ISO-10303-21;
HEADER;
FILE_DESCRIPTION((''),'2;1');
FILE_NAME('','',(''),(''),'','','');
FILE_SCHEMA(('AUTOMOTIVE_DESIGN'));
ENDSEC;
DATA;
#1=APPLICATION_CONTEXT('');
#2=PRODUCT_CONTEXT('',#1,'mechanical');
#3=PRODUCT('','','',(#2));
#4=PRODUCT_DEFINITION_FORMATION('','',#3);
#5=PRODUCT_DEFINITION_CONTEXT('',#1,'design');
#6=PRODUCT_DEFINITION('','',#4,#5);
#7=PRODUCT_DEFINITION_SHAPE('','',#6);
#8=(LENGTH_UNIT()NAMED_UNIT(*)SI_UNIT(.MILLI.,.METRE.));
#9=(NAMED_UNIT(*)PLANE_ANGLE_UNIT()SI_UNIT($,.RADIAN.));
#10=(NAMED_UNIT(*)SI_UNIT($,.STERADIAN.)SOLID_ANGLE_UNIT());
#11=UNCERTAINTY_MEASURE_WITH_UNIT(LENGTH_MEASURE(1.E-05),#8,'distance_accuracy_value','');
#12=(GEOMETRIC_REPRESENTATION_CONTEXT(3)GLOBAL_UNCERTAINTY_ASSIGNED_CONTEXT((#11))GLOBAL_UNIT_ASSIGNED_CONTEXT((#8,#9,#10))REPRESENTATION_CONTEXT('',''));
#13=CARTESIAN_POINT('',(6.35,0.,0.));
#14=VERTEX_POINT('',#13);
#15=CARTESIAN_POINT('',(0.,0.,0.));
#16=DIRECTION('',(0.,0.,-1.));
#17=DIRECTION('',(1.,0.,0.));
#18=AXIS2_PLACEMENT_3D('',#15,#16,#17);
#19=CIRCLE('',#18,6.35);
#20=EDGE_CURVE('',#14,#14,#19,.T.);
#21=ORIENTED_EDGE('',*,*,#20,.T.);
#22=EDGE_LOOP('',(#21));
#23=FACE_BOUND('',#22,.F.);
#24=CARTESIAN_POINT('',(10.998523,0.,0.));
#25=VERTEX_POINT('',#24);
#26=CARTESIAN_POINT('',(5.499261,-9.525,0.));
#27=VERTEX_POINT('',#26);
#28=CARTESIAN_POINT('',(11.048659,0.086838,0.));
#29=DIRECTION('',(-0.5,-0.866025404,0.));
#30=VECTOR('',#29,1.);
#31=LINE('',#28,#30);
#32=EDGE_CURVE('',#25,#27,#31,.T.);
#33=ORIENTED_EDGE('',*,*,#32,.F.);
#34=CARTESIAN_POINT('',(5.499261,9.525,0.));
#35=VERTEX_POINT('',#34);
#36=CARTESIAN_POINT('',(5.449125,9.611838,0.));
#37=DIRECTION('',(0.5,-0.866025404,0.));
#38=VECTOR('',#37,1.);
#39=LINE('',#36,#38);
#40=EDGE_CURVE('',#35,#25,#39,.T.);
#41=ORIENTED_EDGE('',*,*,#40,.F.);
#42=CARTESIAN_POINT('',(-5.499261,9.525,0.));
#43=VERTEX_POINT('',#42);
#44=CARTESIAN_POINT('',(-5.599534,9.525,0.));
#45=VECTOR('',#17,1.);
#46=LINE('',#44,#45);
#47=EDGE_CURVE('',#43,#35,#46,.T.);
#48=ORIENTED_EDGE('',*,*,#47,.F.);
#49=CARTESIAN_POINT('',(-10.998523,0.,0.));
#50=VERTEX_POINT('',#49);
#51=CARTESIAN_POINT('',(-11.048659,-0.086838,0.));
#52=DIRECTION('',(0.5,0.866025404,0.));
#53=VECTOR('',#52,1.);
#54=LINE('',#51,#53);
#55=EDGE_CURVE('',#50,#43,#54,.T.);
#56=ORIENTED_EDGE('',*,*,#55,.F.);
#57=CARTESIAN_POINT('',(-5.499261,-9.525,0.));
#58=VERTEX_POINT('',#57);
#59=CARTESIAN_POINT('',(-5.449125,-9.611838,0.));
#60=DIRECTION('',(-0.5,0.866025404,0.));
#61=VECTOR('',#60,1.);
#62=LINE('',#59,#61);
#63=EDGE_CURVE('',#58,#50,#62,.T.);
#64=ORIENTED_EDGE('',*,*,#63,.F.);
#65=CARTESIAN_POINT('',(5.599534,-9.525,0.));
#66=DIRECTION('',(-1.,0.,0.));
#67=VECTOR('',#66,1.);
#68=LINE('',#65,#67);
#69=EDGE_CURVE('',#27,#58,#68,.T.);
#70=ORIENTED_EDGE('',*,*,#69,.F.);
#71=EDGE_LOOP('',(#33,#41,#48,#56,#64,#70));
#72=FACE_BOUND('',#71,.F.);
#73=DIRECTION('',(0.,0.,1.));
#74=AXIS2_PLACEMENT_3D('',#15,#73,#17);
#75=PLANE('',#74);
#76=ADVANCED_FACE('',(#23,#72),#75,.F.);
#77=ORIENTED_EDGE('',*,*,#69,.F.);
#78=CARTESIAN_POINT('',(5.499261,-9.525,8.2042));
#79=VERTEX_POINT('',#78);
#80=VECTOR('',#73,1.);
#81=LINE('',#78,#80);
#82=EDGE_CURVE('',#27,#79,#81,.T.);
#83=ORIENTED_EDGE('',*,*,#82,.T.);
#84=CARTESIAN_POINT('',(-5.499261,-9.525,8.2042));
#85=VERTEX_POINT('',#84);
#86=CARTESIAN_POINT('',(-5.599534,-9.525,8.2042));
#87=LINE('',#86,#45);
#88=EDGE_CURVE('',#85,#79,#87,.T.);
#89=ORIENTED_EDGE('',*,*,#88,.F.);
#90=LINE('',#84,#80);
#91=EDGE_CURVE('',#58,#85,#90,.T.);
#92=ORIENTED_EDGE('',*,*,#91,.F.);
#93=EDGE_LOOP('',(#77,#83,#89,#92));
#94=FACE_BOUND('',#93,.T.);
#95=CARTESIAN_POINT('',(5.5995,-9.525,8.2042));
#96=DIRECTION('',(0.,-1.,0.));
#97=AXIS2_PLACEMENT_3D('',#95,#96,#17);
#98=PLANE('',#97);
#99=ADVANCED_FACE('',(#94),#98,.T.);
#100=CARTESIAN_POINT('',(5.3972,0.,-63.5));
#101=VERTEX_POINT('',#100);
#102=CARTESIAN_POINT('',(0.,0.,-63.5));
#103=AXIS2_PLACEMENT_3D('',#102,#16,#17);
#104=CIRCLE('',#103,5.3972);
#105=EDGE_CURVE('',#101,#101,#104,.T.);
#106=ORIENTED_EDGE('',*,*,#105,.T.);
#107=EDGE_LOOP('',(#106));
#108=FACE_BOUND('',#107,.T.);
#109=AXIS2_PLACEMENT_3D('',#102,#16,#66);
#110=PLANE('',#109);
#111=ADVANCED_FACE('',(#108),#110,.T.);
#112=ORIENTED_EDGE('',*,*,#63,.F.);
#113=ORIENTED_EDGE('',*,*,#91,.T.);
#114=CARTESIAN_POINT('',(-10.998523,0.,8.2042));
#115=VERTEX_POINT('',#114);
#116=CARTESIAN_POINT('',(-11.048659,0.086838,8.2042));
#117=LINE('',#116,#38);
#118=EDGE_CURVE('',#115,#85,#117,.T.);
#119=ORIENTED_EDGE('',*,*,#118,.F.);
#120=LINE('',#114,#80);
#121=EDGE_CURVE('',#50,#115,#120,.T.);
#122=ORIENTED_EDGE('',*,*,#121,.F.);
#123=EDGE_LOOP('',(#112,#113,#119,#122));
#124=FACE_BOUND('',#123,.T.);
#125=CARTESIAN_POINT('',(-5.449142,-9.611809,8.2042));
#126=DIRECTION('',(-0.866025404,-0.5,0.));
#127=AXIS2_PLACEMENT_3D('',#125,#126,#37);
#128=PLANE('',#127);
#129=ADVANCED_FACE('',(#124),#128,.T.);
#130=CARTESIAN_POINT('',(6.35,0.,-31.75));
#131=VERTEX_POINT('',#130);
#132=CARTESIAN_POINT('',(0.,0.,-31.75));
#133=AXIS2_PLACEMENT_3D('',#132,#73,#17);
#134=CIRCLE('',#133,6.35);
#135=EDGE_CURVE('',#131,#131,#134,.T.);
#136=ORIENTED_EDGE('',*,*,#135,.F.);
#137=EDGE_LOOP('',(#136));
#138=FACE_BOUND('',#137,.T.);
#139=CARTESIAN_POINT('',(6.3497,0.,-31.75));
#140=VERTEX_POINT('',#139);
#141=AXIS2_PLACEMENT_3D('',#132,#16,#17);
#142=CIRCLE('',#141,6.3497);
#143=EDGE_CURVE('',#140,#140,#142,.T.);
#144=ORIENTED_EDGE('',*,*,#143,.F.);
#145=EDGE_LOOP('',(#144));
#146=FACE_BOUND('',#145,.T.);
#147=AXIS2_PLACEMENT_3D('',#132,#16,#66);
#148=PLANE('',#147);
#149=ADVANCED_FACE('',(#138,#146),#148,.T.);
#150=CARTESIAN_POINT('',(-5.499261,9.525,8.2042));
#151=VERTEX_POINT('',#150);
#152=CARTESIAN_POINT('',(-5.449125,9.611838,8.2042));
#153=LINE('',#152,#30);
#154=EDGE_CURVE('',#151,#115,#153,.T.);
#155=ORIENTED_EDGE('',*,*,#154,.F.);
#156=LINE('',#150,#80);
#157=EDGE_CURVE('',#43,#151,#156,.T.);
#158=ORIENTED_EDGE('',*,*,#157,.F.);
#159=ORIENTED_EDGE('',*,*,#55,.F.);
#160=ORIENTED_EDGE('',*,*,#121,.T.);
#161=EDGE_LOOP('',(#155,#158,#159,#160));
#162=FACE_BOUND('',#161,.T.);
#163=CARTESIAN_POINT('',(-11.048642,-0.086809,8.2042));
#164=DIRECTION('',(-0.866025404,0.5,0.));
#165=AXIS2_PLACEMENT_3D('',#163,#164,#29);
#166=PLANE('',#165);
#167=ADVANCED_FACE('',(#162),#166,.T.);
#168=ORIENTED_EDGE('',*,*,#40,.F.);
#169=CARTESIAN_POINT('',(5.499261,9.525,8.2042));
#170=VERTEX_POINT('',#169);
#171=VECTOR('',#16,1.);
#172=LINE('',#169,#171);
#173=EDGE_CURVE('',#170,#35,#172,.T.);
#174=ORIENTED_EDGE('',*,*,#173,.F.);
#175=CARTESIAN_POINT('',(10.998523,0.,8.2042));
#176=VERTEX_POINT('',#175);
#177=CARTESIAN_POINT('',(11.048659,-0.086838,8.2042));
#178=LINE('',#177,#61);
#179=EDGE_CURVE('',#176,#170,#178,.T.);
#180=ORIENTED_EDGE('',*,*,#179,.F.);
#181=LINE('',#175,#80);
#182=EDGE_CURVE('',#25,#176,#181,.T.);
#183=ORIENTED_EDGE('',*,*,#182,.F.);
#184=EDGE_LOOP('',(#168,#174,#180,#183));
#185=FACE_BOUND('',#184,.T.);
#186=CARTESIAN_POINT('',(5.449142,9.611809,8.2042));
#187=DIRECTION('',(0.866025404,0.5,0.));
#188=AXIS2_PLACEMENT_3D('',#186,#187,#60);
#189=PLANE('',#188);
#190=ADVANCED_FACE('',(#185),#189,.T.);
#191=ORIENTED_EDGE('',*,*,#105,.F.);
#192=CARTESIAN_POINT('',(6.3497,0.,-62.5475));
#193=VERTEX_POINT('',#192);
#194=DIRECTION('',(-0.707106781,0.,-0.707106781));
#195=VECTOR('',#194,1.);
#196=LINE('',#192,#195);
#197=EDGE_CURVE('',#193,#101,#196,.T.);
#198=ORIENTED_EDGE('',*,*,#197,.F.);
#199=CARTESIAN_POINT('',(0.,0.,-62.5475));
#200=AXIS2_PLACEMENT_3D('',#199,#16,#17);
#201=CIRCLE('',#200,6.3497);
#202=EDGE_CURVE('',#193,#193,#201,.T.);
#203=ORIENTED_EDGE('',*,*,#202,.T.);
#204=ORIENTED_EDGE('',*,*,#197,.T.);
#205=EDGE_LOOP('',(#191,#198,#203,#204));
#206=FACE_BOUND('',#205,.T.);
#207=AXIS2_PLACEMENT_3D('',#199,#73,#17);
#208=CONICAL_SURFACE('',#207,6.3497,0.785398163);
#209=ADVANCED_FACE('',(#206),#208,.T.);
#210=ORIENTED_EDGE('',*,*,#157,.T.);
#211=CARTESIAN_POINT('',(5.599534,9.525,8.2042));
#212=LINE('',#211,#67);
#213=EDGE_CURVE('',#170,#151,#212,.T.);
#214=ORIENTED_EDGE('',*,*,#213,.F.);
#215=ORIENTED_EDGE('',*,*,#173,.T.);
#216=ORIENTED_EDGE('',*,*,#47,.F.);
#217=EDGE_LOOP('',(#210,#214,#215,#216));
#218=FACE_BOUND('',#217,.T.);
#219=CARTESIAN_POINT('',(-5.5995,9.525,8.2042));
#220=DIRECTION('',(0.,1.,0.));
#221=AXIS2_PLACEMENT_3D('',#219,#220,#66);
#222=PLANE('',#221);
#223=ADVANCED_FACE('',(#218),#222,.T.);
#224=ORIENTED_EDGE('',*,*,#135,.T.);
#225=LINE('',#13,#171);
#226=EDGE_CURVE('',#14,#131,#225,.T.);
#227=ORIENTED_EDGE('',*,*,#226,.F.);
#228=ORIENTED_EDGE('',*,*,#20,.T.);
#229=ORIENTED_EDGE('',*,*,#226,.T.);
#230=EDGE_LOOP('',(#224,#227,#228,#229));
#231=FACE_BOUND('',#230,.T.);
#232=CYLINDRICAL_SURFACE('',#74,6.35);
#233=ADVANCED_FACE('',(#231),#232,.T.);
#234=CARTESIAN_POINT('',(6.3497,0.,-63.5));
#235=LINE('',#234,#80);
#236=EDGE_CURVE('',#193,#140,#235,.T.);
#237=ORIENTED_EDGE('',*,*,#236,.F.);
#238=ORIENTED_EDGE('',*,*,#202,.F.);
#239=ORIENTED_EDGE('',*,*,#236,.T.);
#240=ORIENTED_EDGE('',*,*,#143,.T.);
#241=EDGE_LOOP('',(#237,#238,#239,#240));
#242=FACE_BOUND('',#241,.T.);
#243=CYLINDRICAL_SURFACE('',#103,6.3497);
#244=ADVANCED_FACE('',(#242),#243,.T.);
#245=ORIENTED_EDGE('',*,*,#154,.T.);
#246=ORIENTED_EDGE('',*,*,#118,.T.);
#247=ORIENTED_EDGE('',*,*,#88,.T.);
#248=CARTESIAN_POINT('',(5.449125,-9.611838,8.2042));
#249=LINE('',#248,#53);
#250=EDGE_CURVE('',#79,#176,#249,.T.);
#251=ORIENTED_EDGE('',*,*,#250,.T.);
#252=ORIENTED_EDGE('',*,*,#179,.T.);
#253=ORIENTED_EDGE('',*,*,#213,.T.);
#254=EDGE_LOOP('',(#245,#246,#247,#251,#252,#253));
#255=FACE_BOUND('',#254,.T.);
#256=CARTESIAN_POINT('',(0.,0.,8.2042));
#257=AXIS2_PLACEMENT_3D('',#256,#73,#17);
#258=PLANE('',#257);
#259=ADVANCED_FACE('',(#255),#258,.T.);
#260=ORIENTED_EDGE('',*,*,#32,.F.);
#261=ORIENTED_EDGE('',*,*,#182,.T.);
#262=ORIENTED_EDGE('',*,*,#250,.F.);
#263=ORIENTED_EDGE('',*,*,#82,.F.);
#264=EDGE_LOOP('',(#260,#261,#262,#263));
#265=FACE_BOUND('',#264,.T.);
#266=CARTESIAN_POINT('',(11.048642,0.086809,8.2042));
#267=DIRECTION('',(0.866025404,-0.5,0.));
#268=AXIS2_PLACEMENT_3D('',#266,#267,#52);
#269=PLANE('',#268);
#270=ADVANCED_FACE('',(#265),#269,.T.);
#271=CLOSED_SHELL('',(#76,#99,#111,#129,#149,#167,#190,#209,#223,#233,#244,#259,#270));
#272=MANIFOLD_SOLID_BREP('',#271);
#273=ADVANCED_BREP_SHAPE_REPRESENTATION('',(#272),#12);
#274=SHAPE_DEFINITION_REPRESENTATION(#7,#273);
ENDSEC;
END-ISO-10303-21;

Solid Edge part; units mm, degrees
sketch "Sketch1" plane through (0, 0, 0) normal (0, 0, 1) x (1, 0, 0)
  circle A0 centre (0, 0) radius 11.049
  dimension "D1" = 22.098
extrude "Protrusion1" add sketch "Sketch1" along normal blind 8.2042
sketch "Sketch2" plane through (0, 0, 0) normal (0, 0, -1) x (1, 0, 0)
  circle A0 centre (0, 0) radius 6.35
extrude "Protrusion2" add sketch "Sketch2" along normal blind 63.5
sketch "Sketch3" plane through (0, 0, -63.5) normal (0, 0, -1) x (1, 0, 0)
  circle A0 centre (0, 0) radius 6.3497
extrude "Cutout1" cut sketch "Sketch3" against normal blind 31.75 flip side to cut
chamfer "Chamfer_1" distance 0.9525 angle 45 1 edges at (-6.3497, 0, -63.5)
sketch "Sketch4" plane through (0, 0, 8.2042) normal (0, 0, 1) x (1, 0, 0)
  line L0 (-5.5995, 9.525) -> (5.5995, 9.525)
  dimension "D1" = 19.05
extrude "Cutout2" cut sketch "Sketch4" against normal up to next material side at (0, 9.575, 8.2042)
pattern_circular "Pattern1" count 6 over 360 about axis through (0, 0, 8.2042) along (0, 0, 1) of "Cutout2"
properties part number "24104222"
